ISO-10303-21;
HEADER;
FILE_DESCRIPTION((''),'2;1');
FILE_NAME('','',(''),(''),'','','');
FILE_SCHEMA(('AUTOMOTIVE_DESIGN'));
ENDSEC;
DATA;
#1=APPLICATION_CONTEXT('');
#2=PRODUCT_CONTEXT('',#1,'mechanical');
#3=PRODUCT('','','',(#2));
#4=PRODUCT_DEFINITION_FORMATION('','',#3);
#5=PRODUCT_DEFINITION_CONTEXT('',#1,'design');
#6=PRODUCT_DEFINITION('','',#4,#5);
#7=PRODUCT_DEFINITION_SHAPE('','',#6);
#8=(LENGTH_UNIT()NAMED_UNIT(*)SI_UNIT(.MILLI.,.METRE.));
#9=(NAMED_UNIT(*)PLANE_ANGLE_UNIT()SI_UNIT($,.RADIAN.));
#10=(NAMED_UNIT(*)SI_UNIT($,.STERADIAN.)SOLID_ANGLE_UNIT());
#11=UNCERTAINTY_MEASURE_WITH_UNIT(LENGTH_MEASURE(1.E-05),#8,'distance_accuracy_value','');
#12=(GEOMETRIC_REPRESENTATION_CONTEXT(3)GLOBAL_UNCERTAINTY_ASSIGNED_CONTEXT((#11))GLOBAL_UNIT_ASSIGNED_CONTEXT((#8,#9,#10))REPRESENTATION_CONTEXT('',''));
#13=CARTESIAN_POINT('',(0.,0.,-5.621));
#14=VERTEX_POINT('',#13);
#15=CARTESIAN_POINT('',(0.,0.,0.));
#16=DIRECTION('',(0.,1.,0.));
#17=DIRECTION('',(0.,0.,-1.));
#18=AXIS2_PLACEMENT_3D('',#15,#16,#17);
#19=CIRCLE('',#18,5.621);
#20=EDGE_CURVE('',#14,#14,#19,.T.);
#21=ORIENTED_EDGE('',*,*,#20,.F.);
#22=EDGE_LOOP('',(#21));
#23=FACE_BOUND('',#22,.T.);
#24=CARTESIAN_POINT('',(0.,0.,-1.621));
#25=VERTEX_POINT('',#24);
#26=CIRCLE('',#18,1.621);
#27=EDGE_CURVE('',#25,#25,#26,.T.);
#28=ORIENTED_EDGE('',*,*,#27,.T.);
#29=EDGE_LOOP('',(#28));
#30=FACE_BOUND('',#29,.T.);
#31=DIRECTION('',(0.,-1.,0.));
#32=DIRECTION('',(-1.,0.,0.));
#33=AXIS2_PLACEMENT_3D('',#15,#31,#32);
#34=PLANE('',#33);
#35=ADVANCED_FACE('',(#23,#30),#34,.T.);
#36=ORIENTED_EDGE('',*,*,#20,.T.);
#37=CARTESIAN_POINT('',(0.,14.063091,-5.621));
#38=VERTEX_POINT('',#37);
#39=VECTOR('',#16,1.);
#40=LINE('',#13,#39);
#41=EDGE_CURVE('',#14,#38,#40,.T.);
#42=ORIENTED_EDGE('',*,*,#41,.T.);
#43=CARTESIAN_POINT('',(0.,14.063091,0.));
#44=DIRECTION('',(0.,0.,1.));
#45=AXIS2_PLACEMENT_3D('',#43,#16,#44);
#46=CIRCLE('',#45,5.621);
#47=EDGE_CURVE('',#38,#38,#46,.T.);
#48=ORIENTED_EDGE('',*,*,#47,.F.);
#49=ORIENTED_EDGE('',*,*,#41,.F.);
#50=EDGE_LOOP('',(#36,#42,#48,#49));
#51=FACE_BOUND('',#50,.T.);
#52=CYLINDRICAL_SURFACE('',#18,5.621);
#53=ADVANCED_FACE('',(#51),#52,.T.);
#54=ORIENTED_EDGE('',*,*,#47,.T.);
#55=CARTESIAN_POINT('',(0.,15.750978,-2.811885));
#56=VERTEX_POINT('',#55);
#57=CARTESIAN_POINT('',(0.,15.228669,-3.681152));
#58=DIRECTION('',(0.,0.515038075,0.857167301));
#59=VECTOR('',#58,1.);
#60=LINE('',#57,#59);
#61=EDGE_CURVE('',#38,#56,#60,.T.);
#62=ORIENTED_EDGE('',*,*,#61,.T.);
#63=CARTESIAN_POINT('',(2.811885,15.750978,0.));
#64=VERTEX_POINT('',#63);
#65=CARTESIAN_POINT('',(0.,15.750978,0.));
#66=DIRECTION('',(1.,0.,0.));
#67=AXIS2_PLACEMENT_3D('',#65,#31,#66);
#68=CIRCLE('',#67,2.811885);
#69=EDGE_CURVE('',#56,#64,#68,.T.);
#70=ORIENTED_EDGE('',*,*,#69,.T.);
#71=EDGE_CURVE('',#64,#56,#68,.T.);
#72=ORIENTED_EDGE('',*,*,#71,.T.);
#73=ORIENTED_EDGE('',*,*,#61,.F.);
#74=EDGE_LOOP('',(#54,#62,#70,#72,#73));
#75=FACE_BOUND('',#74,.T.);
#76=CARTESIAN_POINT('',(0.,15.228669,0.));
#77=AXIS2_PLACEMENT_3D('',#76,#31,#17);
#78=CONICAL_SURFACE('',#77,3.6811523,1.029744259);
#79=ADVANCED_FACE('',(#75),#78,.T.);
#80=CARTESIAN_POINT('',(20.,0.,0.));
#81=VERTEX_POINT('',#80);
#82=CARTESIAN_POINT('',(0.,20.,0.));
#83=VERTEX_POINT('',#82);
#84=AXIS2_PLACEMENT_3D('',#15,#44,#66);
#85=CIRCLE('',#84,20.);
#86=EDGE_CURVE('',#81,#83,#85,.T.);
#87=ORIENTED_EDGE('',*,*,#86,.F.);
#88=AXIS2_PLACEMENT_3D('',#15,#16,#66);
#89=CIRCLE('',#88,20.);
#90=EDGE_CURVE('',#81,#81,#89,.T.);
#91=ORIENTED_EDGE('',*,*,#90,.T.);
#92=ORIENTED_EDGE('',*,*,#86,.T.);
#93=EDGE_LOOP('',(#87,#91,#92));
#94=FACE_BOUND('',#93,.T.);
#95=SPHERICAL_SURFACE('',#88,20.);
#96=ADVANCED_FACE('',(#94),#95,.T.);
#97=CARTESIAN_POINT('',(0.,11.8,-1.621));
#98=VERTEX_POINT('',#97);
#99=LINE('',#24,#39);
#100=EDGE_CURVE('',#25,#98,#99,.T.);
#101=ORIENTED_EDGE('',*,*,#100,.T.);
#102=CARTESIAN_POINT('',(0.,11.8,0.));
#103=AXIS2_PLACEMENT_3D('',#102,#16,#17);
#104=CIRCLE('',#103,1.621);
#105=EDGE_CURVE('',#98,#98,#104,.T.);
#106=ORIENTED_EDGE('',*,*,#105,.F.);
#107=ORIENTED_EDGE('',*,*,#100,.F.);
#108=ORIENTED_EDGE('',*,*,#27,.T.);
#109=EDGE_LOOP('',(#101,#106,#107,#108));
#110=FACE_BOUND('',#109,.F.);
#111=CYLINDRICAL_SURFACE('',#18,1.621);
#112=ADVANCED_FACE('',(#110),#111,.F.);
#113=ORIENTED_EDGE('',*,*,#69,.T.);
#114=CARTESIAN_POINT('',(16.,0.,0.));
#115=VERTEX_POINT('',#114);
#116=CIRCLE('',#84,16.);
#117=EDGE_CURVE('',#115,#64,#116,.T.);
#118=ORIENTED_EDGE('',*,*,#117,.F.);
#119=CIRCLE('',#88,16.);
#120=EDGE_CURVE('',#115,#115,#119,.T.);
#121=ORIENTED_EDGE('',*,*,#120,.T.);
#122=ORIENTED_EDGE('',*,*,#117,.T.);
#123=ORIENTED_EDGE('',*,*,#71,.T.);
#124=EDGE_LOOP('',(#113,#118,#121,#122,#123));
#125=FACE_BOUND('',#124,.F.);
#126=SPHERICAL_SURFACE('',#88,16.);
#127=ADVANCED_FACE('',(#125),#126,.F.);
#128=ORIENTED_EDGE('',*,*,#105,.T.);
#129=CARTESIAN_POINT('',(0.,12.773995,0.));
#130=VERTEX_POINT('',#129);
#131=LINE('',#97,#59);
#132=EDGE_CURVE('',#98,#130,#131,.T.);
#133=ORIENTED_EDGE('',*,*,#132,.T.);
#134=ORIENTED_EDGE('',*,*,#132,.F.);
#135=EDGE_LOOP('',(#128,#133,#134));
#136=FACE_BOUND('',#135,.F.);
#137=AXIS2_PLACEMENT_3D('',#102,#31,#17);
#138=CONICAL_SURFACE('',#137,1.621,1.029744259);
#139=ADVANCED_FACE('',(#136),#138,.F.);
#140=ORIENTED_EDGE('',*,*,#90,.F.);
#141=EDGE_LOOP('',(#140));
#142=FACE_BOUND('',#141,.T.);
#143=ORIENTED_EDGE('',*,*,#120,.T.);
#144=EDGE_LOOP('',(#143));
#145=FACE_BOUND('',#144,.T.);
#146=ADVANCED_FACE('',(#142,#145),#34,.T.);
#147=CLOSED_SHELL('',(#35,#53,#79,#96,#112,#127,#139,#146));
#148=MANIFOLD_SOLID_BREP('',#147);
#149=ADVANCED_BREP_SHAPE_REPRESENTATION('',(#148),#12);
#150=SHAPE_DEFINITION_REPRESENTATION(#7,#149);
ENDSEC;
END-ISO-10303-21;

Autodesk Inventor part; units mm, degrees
ref_plane "YZ Plane" through (0, 0, 0) normal (1, 0, 0) x (0, 1, 0)
ref_plane "XZ Plane" through (0, 0, 0) normal (0, 1, 0) x (-1, 0, 0)
ref_plane "XY Plane" through (0, 0, 0) normal (0, 0, 1) x (1, 0, 0)
sketch "Sketch1" plane through (0, 0, 0) normal (0, 0, 1) x (1, 0, 0)
  line L0 (0, 0) -> (0, 20)
  line L1 (0, 0) -> (20, 0)
  arc A0 (20, 0) -> (0, 20) centre (0, 0) ccw
  line L2 (0, -4.8284) -> (0, 28.9706) projected
  dimension "d2" = 20
revolve "Revolution1" add sketch "Sketch1" angle 360 about axis through (0, -10, 0) along (0, 1, 0)
sketch "Sketch4" plane through (0, 0, 0) normal (0, -1, 0) x (1, 0, 0)
  point P0 (0, 0)
  point P1 (0, 0)
hole "Hole2" at (0, 0, 0) direction (0, 1, 0) diameter 3.242 depth 11.8 tip angle 118 thread size "M4x0.7" class "6H" standard "ANSI Metric M Profile"
shell "Shell2" thickness 4 removed faces 1 at (13.676, 0, 1.6606)
properties part number "Ball_Upper Half" material "Nylon 6/6"
